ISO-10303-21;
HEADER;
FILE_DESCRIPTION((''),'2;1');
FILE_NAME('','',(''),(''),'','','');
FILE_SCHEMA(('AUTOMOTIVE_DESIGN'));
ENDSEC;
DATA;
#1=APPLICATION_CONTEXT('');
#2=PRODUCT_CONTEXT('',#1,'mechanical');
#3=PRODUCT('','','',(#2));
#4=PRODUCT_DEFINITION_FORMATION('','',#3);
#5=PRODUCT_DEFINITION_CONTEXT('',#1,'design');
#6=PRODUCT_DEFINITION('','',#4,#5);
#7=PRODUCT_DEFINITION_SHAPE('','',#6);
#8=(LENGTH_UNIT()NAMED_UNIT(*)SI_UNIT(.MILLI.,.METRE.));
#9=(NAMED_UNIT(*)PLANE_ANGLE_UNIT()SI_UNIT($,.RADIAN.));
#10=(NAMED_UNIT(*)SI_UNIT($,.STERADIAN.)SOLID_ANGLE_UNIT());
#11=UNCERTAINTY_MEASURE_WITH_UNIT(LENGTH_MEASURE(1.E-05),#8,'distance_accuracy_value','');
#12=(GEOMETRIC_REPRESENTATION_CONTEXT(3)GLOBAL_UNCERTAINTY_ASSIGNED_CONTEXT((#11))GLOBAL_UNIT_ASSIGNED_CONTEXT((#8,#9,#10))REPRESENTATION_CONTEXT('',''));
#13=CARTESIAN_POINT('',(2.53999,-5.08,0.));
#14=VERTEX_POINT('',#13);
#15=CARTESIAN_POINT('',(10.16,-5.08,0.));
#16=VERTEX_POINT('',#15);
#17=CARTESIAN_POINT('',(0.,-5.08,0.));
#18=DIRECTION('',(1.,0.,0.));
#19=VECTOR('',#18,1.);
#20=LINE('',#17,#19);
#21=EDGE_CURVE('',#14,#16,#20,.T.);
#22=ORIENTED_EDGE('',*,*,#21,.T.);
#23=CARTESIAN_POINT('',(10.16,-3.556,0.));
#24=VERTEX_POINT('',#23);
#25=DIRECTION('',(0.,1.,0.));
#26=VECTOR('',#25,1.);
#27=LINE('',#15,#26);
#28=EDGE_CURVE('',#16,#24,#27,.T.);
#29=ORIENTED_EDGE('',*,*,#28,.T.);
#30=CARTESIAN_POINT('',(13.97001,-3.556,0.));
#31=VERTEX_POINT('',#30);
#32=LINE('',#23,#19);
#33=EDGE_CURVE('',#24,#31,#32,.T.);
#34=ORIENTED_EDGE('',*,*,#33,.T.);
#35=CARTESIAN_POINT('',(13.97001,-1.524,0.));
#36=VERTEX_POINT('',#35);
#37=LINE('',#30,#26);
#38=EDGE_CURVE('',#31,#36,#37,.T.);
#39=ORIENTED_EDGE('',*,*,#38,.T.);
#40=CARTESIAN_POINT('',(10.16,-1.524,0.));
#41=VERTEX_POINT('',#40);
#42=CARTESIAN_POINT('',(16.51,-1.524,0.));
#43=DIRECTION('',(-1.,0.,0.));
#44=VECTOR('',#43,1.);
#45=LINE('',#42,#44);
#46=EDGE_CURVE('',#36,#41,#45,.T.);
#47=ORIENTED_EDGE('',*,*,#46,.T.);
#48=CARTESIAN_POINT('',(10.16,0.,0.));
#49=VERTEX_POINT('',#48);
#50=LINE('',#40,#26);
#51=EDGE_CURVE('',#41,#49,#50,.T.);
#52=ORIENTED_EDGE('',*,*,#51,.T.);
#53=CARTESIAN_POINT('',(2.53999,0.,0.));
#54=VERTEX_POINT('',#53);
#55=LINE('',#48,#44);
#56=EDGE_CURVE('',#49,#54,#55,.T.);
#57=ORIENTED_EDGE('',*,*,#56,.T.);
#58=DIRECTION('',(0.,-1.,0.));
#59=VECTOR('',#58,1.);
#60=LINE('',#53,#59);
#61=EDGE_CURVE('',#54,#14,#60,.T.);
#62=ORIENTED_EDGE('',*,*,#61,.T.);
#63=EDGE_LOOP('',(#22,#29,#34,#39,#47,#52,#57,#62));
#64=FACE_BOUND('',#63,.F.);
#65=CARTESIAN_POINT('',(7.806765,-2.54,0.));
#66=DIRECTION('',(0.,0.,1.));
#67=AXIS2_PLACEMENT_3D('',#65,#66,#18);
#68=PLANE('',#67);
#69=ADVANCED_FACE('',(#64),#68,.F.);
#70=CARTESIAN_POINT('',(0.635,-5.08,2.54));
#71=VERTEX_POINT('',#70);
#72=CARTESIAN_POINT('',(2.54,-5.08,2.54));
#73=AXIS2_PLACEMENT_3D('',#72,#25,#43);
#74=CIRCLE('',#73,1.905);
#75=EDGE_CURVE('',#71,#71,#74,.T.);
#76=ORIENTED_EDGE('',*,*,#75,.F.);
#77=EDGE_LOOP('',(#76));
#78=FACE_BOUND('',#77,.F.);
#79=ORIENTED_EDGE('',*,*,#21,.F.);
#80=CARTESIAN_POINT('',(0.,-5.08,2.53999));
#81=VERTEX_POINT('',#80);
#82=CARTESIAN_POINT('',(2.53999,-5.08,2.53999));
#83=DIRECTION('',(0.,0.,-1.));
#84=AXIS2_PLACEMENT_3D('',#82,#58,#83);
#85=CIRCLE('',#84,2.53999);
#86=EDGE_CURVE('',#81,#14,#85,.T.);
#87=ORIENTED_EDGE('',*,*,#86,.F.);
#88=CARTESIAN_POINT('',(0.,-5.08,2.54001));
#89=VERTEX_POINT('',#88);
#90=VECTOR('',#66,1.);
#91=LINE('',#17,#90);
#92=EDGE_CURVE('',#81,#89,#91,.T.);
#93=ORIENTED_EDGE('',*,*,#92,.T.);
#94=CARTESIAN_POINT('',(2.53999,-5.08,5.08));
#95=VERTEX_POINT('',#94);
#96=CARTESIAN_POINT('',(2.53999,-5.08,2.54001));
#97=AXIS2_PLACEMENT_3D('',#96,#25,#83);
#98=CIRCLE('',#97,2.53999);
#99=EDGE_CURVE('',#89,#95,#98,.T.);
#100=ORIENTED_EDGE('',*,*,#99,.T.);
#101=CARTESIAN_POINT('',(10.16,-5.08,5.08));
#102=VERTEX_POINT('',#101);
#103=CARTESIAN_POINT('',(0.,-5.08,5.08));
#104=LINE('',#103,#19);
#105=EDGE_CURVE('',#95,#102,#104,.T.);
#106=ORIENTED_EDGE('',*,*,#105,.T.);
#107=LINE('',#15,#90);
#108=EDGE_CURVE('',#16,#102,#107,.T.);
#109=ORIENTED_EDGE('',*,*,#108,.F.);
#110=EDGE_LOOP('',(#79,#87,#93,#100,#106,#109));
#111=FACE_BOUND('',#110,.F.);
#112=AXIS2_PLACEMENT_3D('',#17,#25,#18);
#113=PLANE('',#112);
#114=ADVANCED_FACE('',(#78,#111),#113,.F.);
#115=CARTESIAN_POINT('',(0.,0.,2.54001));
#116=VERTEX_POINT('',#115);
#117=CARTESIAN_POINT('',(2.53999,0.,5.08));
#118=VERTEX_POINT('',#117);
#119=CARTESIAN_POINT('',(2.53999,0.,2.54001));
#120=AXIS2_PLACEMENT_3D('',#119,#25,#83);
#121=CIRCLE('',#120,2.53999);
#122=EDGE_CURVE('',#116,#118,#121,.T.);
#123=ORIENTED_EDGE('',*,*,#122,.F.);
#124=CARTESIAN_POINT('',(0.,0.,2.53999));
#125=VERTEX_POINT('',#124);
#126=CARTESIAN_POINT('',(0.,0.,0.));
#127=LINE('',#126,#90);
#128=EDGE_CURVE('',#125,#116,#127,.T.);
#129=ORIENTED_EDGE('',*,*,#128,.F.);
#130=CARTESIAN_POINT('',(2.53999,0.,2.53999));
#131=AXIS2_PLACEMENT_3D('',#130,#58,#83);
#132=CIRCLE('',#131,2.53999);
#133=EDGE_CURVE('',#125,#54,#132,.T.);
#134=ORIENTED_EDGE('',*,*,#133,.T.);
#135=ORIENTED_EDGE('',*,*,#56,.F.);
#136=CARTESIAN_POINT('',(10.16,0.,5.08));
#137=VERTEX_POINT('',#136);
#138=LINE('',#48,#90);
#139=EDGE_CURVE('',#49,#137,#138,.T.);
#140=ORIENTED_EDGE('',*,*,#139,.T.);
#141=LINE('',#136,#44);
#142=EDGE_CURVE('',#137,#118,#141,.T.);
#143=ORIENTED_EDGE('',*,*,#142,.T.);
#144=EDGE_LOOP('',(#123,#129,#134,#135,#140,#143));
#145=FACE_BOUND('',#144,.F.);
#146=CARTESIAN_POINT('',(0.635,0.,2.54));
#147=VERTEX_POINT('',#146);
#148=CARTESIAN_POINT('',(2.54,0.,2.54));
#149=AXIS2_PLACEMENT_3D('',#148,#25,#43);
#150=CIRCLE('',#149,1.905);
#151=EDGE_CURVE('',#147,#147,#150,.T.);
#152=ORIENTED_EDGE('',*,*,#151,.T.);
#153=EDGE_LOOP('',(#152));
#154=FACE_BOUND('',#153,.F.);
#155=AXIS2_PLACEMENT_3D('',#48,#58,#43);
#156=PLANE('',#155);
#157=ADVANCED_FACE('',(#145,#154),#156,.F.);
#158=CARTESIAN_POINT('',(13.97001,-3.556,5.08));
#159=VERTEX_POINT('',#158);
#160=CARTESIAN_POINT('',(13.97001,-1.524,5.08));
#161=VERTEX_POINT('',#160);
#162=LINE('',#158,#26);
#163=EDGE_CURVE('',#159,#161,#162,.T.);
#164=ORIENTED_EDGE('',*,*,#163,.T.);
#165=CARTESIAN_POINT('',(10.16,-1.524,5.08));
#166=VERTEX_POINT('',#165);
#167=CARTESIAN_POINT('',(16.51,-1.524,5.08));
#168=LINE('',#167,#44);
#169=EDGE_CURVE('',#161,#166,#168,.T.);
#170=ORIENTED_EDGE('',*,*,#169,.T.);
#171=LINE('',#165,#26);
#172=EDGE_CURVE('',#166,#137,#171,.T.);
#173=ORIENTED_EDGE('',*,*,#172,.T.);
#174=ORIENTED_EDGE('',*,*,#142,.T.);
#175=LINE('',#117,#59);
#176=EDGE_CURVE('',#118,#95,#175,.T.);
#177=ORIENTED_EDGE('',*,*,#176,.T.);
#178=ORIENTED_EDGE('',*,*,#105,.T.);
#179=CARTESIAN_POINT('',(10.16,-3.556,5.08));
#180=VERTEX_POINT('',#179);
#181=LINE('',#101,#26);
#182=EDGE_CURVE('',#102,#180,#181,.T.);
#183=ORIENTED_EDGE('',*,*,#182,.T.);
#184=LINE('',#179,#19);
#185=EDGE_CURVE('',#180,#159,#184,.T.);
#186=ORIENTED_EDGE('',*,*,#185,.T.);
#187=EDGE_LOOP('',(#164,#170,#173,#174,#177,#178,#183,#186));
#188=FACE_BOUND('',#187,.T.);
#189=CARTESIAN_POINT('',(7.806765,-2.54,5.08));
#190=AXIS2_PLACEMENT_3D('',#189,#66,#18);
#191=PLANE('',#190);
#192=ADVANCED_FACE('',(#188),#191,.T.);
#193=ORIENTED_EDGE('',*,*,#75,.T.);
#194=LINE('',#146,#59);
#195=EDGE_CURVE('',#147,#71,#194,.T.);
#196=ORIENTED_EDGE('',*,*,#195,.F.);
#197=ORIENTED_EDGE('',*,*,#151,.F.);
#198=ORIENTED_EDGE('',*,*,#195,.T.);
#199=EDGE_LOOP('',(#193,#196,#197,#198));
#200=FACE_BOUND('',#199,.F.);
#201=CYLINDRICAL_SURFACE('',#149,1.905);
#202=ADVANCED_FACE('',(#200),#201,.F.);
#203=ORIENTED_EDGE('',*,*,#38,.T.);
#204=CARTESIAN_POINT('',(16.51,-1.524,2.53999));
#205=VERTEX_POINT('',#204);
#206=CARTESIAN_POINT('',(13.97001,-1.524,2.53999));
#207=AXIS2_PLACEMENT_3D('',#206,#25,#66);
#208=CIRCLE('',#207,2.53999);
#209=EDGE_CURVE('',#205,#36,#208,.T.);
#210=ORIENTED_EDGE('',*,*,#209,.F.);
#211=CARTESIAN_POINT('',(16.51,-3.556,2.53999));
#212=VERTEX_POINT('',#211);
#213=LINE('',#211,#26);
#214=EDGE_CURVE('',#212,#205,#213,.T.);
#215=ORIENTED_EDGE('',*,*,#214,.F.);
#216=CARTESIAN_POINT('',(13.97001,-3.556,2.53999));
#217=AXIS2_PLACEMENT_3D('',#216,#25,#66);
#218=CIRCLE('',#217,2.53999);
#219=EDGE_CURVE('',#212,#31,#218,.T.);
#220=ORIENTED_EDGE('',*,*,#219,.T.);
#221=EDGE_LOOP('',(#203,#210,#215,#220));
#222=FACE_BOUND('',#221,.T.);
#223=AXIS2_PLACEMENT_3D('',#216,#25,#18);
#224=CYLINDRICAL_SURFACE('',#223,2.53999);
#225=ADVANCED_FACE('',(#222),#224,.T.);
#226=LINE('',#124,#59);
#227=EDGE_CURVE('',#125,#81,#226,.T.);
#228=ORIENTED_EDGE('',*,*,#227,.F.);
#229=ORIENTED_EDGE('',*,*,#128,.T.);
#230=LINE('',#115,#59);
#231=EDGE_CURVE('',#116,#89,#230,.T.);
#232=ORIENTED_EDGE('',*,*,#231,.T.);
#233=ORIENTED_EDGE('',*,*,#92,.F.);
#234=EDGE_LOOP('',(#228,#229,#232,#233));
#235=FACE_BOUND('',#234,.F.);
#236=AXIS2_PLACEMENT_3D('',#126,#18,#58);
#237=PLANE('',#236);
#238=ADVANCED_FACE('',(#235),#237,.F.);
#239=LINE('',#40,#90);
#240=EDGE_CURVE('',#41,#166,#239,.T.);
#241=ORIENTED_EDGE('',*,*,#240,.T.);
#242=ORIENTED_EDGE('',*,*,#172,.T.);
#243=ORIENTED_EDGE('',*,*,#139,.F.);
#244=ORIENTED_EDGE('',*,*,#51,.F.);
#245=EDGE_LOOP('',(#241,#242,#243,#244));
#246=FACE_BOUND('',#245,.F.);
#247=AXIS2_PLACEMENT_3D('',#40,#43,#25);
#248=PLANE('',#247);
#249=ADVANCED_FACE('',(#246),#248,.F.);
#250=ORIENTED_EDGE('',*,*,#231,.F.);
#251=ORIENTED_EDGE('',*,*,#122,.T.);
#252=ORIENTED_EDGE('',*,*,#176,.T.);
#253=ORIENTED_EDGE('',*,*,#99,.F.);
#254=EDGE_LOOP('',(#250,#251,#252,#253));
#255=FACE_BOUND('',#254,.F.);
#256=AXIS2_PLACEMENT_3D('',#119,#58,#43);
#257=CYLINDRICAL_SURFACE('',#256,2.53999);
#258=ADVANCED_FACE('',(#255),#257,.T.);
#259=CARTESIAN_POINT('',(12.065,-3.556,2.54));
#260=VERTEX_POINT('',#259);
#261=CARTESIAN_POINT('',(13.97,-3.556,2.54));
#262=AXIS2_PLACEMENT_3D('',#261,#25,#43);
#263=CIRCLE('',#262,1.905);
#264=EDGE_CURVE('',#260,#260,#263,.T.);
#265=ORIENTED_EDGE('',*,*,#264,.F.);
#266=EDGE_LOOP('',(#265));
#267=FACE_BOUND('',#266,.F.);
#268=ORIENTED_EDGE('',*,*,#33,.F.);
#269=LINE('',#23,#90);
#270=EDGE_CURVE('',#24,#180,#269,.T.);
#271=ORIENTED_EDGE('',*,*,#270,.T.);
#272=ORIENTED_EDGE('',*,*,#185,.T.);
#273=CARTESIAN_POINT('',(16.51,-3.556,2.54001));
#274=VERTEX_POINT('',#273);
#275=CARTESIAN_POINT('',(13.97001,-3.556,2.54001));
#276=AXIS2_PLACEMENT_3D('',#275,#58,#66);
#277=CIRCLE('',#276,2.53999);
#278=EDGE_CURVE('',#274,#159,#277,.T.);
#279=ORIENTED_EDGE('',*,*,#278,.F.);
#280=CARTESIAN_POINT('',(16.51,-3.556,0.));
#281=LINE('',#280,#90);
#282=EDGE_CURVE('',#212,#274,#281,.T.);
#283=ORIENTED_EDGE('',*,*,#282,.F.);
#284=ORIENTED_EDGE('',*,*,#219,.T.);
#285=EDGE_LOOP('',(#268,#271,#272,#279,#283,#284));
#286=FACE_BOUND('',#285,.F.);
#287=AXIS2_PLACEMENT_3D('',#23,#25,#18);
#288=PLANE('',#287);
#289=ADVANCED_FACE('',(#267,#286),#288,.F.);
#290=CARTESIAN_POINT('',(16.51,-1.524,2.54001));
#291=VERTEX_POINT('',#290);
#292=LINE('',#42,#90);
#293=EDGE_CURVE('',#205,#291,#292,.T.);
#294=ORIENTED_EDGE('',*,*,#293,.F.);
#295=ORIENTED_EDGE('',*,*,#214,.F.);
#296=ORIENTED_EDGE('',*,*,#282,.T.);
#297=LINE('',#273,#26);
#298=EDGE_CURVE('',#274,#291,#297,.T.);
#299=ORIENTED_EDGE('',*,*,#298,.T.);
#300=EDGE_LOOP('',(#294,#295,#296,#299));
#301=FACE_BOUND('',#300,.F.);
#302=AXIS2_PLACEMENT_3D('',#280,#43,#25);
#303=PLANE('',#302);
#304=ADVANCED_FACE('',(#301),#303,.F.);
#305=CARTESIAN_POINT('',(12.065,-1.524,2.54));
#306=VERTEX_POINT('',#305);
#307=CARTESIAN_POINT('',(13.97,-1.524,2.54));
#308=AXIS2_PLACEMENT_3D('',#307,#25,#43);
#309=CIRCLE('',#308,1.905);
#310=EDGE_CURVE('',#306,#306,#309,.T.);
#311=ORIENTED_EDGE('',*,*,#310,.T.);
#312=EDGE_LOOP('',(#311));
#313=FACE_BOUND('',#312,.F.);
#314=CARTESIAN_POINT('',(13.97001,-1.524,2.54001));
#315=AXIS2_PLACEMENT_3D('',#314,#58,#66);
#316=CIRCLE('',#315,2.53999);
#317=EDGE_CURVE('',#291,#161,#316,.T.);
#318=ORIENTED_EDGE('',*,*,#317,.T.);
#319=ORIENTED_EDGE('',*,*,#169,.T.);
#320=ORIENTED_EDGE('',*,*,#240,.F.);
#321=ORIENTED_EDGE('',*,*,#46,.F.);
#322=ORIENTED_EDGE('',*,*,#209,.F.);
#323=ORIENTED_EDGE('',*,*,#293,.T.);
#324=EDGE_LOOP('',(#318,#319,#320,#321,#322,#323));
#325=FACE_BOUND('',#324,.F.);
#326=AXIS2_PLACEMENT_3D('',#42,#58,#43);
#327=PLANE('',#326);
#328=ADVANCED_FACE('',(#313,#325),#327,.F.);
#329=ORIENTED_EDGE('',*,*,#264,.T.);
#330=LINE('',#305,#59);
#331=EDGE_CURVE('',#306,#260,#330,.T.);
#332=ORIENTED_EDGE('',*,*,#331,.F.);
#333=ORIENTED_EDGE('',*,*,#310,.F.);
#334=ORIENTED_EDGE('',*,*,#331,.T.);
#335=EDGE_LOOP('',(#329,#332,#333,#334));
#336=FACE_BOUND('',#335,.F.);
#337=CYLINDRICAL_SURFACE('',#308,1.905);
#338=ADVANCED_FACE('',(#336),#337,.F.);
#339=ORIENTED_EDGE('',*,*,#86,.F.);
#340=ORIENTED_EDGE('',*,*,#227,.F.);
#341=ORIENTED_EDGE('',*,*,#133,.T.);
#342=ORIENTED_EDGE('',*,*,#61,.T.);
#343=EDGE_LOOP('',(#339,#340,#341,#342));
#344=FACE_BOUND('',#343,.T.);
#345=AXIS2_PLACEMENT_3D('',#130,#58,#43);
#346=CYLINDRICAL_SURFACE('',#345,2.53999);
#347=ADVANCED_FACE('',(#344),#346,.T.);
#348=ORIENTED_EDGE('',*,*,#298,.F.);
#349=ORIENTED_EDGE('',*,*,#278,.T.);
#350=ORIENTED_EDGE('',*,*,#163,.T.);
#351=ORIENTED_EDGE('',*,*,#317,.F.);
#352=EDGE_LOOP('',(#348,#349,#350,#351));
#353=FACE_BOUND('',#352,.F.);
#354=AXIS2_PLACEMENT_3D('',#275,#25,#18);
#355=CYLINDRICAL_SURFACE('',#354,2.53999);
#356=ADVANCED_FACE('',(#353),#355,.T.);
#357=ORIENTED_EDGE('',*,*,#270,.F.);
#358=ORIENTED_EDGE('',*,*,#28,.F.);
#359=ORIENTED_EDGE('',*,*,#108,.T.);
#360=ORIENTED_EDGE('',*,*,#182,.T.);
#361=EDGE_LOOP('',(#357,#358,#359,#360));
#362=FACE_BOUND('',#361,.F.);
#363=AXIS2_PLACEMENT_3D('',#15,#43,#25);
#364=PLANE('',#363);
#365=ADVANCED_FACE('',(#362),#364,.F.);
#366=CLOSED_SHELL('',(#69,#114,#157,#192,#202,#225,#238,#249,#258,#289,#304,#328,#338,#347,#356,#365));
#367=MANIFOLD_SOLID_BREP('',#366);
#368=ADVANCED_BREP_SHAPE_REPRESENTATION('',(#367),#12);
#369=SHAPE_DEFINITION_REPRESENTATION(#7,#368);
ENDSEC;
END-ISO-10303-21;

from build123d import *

# Parameters (mm, degrees)
F1_DEPTH = 5.08
F2_R     = 2.53999
F3_R     = 1.905
F4_DEPTH = 25.4
F5_R     = 1.905
F6_DEPTH = 5.08


# Not quite as in the source:
# - a fillet or chamfer is up to 0.001 mm smaller than in the source, because OpenCascade refuses the exact size


with BuildPart() as f1:
    # F0 (on Top) → F1 (new body)
    with BuildSketch(Plane.XY):
        Polygon((10.16, 0), (0, 0), (0, -5.08), (10.16, -5.08), (10.16, -3.556), (16.51, -3.556), (16.51, -1.524), (10.16, -1.524), align=None)
    extrude(amount=F1_DEPTH)

    # F2 (radius 2.54 in the source; OpenCascade refuses exactly that, so slightly less here)
    f2_edges = [f1.edges().sort_by_distance(p)[0] for p in [
        (16.51, -2.54, 5.08),
        (16.51, -2.54, 0),
        (0, -2.54, 5.08),
        (0, -2.54, 0),
    ]]
    fillet(f2_edges, radius=F2_R)

    # F3 (on face) → F4 (cut)
    with BuildSketch(Plane(origin=(0, -1.524, 0), x_dir=(-1, 0, 0), z_dir=(0, 1, 0))):
        with Locations((-13.97, 2.54)):
            Circle(F3_R)
    extrude(amount=-F4_DEPTH, mode=Mode.SUBTRACT)

    # F5 (on face) → F6 (cut)
    with BuildSketch(Plane(origin=(0, 0, 0), x_dir=(-1, 0, 0), z_dir=(0, 1, 0))):
        with Locations((-2.54, 2.54)):
            Circle(F5_R)
    extrude(amount=-F6_DEPTH, mode=Mode.SUBTRACT)


solid = f1.part
